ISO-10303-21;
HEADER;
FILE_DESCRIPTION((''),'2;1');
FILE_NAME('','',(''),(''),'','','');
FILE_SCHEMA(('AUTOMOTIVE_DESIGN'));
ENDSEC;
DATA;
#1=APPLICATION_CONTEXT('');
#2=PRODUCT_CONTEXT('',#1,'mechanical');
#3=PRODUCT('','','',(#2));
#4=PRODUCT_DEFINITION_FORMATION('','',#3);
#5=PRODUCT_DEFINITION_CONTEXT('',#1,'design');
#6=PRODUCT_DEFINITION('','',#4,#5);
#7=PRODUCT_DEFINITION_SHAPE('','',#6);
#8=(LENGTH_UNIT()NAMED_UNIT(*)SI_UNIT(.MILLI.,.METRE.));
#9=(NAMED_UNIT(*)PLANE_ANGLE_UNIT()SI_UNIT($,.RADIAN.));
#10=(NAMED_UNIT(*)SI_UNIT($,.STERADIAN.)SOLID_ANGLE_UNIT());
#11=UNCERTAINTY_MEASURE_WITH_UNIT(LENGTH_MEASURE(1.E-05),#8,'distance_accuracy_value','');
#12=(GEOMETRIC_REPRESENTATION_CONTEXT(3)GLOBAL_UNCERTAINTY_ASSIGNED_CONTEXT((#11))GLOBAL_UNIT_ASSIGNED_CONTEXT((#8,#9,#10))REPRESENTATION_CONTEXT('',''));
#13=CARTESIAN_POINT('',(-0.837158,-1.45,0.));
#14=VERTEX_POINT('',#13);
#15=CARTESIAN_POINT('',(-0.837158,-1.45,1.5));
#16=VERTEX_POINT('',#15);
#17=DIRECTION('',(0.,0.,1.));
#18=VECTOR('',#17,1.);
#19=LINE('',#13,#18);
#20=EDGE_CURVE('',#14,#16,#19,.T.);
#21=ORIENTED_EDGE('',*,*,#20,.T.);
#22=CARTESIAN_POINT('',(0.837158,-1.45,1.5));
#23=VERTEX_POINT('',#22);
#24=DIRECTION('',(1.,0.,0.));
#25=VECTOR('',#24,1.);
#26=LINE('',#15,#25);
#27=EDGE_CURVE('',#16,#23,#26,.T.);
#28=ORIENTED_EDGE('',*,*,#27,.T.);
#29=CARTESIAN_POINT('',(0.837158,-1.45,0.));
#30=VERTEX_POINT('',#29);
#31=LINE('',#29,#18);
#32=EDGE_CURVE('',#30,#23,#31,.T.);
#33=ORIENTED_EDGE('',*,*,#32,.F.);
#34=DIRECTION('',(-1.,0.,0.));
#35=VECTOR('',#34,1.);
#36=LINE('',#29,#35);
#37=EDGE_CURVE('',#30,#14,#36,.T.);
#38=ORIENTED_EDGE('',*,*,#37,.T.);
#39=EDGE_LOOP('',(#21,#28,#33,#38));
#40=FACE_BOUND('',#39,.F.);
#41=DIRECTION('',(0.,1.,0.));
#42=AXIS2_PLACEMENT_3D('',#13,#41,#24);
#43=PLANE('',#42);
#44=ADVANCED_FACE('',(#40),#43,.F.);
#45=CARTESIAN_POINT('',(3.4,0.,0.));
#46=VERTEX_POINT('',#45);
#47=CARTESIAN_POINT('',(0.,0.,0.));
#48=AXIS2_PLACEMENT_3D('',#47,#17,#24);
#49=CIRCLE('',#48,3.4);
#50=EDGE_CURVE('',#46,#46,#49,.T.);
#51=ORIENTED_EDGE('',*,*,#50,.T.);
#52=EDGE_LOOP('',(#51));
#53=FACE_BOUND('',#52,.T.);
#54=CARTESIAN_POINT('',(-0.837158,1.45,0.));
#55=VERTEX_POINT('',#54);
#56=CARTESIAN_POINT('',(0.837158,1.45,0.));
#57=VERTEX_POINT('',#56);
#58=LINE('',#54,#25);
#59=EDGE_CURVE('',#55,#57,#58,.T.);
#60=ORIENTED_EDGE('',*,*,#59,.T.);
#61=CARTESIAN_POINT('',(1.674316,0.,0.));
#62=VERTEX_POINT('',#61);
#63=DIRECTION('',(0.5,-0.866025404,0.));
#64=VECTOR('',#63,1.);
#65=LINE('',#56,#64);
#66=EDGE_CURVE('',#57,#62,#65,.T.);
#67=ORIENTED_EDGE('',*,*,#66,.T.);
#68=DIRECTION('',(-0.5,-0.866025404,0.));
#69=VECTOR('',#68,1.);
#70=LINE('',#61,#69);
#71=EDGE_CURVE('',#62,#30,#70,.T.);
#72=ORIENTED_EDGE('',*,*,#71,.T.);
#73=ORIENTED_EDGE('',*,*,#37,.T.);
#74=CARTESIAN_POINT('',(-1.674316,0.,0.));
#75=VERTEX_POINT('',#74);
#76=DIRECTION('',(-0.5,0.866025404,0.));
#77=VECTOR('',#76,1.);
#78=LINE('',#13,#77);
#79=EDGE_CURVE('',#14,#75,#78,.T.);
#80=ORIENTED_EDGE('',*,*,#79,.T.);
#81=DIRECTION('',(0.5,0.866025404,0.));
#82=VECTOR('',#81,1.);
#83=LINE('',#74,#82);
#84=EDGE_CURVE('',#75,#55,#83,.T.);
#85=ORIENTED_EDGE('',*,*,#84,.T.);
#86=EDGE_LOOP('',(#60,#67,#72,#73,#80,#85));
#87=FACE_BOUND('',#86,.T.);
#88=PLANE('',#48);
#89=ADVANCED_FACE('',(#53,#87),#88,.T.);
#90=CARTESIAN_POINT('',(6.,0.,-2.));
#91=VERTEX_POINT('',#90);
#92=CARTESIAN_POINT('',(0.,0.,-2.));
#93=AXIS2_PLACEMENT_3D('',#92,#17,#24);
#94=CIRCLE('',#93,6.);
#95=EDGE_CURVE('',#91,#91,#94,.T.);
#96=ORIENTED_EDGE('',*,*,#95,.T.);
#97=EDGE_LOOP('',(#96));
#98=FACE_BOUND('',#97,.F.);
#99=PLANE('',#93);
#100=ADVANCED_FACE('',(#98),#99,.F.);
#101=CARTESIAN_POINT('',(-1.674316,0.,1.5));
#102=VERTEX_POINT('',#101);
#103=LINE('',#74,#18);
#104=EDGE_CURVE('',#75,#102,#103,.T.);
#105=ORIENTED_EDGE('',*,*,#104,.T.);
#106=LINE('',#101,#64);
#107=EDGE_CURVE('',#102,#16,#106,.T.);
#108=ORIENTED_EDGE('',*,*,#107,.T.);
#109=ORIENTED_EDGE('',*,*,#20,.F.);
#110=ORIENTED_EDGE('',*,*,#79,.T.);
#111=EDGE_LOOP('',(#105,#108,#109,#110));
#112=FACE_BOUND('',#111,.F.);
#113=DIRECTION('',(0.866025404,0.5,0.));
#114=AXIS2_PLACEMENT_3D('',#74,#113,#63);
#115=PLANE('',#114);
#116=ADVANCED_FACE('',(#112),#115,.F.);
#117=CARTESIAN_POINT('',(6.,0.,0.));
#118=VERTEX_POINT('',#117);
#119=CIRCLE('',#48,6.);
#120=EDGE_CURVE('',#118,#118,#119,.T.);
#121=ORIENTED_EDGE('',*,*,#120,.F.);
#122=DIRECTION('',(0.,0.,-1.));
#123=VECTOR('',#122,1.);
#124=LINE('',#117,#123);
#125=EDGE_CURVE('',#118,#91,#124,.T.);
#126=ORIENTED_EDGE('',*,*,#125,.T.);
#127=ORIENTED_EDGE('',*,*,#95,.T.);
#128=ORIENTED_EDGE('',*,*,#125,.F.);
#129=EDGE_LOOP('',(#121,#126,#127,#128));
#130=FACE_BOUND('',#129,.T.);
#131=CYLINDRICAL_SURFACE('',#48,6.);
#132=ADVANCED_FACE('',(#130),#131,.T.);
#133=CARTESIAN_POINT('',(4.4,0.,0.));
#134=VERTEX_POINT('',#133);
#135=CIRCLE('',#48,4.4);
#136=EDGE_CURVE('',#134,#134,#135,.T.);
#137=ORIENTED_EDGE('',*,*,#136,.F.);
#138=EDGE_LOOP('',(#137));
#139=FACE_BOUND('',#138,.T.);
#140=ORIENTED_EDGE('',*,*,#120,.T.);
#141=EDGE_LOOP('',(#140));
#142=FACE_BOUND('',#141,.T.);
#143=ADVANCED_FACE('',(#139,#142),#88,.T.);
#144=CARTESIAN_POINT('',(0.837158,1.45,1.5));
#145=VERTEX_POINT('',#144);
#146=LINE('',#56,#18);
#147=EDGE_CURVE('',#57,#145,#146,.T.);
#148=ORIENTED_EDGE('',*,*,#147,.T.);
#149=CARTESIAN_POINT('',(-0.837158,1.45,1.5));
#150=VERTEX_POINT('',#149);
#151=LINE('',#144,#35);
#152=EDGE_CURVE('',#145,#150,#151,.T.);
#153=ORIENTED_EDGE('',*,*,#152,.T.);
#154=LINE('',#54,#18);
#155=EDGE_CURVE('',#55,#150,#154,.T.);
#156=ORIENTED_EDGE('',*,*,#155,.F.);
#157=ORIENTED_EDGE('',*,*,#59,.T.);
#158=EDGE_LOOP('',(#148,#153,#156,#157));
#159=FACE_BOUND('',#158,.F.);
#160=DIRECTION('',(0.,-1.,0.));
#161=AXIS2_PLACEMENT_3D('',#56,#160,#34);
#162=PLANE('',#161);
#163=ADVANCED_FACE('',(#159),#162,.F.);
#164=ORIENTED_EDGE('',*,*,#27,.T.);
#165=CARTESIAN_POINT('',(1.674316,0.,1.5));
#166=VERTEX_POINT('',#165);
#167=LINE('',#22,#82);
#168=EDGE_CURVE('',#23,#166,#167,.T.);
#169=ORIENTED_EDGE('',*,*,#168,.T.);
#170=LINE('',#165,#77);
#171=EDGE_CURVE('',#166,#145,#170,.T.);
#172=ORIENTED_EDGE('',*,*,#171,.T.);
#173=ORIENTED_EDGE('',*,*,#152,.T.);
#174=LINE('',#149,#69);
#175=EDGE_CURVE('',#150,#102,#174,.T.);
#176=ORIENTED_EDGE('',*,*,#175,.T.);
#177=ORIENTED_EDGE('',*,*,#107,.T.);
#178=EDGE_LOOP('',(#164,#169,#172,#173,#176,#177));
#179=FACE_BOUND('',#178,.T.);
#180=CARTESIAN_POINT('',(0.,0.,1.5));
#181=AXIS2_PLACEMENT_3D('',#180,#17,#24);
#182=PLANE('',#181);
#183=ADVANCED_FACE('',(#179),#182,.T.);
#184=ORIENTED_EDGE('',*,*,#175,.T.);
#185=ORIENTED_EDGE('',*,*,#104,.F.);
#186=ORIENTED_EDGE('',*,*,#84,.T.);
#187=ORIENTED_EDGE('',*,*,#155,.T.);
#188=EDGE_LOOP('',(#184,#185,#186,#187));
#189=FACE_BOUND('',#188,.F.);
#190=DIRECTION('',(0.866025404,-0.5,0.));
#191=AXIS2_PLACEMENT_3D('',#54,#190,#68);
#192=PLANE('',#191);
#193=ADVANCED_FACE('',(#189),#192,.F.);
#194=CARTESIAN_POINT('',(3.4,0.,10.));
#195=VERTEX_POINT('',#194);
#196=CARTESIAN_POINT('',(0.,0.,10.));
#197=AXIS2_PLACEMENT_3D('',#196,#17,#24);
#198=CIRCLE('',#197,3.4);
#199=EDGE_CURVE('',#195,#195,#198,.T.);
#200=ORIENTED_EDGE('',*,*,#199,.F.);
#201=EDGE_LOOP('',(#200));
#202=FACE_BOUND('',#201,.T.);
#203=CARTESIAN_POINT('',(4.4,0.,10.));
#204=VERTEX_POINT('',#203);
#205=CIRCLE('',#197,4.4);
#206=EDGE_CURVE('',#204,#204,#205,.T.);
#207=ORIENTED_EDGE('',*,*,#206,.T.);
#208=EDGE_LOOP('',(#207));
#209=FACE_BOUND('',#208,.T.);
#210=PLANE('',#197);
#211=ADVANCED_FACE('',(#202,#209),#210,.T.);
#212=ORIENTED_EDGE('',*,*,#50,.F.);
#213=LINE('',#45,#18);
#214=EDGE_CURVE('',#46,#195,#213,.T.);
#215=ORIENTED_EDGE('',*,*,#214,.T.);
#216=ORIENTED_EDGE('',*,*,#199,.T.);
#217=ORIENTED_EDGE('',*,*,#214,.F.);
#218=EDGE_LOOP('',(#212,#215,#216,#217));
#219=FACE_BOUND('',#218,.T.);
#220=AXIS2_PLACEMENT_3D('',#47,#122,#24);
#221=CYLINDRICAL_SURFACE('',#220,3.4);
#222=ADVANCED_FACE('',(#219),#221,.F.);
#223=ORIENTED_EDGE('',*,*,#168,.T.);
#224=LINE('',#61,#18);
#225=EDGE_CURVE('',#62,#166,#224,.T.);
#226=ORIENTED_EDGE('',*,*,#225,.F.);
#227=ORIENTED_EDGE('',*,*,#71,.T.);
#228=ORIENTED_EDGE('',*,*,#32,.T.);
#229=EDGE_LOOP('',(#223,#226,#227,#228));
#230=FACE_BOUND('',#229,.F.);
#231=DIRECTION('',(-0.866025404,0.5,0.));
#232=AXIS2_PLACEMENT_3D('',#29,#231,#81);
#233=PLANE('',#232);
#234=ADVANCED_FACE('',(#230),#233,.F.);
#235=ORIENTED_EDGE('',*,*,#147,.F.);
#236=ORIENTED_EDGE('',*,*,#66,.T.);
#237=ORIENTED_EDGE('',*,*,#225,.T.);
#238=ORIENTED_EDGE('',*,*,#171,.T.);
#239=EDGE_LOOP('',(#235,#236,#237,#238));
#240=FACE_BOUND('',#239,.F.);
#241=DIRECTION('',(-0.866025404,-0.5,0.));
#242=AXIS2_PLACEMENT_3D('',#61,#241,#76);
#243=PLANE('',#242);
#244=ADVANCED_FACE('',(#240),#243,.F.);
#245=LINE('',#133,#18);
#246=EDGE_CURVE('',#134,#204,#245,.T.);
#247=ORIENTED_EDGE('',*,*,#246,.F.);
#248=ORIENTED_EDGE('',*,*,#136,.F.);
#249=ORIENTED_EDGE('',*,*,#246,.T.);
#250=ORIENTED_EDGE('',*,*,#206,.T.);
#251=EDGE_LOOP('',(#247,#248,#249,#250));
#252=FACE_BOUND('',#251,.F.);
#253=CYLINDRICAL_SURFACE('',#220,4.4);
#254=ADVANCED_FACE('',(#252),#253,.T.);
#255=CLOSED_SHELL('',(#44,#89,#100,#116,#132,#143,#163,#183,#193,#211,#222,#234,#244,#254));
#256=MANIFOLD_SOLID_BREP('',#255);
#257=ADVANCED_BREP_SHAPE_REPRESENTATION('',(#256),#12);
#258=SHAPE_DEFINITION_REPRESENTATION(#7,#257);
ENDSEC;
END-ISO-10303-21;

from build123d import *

# Parameters (mm, degrees)
F0_R     = 6
F0_R_2   = 4.4
F0_R_3   = 3.4
F1_DEPTH = 2
F2_DEPTH = 10
F3_DEPTH = 1.5
F4_DEPTH = 2


with BuildPart() as f1:
    # F0 (on Top) → F1 (new body)
    with BuildSketch(Plane.XY):
        Circle(F0_R)
        Circle(F0_R_2, mode=Mode.SUBTRACT)
        Circle(F0_R_2)
        Circle(F0_R_3, mode=Mode.SUBTRACT)
        Circle(F0_R_3)
        Polygon((0.8371578903, 1.45), (1.6743157806, 0), (0.8371578903, -1.45), (-0.8371578903, -1.45), (-1.6743157806, 0), (-0.8371578903, 1.45), align=None, mode=Mode.SUBTRACT)
    extrude(amount=-F1_DEPTH)

    # F0 (on Top) → F2 (join)
    with BuildSketch(Plane.XY):
        Circle(F0_R_2)
        Circle(F0_R_3, mode=Mode.SUBTRACT)
    extrude(amount=F2_DEPTH)

    # F0 (on Top) → F3 (join)
    with BuildSketch(Plane.XY):
        Polygon((0.8371578903, -1.45), (1.6743157806, 0), (0.8371578903, 1.45), (-0.8371578903, 1.45), (-1.6743157806, 0), (-0.8371578903, -1.45), align=None)
    extrude(amount=F3_DEPTH)

    # F4 (add): a face of the model
    f4_faces = [f1.faces().sort_by_distance(p)[0] for p in [
        (0, 0, 0),
    ]]
    extrude(f4_faces, amount=F4_DEPTH)


solid = f1.part
